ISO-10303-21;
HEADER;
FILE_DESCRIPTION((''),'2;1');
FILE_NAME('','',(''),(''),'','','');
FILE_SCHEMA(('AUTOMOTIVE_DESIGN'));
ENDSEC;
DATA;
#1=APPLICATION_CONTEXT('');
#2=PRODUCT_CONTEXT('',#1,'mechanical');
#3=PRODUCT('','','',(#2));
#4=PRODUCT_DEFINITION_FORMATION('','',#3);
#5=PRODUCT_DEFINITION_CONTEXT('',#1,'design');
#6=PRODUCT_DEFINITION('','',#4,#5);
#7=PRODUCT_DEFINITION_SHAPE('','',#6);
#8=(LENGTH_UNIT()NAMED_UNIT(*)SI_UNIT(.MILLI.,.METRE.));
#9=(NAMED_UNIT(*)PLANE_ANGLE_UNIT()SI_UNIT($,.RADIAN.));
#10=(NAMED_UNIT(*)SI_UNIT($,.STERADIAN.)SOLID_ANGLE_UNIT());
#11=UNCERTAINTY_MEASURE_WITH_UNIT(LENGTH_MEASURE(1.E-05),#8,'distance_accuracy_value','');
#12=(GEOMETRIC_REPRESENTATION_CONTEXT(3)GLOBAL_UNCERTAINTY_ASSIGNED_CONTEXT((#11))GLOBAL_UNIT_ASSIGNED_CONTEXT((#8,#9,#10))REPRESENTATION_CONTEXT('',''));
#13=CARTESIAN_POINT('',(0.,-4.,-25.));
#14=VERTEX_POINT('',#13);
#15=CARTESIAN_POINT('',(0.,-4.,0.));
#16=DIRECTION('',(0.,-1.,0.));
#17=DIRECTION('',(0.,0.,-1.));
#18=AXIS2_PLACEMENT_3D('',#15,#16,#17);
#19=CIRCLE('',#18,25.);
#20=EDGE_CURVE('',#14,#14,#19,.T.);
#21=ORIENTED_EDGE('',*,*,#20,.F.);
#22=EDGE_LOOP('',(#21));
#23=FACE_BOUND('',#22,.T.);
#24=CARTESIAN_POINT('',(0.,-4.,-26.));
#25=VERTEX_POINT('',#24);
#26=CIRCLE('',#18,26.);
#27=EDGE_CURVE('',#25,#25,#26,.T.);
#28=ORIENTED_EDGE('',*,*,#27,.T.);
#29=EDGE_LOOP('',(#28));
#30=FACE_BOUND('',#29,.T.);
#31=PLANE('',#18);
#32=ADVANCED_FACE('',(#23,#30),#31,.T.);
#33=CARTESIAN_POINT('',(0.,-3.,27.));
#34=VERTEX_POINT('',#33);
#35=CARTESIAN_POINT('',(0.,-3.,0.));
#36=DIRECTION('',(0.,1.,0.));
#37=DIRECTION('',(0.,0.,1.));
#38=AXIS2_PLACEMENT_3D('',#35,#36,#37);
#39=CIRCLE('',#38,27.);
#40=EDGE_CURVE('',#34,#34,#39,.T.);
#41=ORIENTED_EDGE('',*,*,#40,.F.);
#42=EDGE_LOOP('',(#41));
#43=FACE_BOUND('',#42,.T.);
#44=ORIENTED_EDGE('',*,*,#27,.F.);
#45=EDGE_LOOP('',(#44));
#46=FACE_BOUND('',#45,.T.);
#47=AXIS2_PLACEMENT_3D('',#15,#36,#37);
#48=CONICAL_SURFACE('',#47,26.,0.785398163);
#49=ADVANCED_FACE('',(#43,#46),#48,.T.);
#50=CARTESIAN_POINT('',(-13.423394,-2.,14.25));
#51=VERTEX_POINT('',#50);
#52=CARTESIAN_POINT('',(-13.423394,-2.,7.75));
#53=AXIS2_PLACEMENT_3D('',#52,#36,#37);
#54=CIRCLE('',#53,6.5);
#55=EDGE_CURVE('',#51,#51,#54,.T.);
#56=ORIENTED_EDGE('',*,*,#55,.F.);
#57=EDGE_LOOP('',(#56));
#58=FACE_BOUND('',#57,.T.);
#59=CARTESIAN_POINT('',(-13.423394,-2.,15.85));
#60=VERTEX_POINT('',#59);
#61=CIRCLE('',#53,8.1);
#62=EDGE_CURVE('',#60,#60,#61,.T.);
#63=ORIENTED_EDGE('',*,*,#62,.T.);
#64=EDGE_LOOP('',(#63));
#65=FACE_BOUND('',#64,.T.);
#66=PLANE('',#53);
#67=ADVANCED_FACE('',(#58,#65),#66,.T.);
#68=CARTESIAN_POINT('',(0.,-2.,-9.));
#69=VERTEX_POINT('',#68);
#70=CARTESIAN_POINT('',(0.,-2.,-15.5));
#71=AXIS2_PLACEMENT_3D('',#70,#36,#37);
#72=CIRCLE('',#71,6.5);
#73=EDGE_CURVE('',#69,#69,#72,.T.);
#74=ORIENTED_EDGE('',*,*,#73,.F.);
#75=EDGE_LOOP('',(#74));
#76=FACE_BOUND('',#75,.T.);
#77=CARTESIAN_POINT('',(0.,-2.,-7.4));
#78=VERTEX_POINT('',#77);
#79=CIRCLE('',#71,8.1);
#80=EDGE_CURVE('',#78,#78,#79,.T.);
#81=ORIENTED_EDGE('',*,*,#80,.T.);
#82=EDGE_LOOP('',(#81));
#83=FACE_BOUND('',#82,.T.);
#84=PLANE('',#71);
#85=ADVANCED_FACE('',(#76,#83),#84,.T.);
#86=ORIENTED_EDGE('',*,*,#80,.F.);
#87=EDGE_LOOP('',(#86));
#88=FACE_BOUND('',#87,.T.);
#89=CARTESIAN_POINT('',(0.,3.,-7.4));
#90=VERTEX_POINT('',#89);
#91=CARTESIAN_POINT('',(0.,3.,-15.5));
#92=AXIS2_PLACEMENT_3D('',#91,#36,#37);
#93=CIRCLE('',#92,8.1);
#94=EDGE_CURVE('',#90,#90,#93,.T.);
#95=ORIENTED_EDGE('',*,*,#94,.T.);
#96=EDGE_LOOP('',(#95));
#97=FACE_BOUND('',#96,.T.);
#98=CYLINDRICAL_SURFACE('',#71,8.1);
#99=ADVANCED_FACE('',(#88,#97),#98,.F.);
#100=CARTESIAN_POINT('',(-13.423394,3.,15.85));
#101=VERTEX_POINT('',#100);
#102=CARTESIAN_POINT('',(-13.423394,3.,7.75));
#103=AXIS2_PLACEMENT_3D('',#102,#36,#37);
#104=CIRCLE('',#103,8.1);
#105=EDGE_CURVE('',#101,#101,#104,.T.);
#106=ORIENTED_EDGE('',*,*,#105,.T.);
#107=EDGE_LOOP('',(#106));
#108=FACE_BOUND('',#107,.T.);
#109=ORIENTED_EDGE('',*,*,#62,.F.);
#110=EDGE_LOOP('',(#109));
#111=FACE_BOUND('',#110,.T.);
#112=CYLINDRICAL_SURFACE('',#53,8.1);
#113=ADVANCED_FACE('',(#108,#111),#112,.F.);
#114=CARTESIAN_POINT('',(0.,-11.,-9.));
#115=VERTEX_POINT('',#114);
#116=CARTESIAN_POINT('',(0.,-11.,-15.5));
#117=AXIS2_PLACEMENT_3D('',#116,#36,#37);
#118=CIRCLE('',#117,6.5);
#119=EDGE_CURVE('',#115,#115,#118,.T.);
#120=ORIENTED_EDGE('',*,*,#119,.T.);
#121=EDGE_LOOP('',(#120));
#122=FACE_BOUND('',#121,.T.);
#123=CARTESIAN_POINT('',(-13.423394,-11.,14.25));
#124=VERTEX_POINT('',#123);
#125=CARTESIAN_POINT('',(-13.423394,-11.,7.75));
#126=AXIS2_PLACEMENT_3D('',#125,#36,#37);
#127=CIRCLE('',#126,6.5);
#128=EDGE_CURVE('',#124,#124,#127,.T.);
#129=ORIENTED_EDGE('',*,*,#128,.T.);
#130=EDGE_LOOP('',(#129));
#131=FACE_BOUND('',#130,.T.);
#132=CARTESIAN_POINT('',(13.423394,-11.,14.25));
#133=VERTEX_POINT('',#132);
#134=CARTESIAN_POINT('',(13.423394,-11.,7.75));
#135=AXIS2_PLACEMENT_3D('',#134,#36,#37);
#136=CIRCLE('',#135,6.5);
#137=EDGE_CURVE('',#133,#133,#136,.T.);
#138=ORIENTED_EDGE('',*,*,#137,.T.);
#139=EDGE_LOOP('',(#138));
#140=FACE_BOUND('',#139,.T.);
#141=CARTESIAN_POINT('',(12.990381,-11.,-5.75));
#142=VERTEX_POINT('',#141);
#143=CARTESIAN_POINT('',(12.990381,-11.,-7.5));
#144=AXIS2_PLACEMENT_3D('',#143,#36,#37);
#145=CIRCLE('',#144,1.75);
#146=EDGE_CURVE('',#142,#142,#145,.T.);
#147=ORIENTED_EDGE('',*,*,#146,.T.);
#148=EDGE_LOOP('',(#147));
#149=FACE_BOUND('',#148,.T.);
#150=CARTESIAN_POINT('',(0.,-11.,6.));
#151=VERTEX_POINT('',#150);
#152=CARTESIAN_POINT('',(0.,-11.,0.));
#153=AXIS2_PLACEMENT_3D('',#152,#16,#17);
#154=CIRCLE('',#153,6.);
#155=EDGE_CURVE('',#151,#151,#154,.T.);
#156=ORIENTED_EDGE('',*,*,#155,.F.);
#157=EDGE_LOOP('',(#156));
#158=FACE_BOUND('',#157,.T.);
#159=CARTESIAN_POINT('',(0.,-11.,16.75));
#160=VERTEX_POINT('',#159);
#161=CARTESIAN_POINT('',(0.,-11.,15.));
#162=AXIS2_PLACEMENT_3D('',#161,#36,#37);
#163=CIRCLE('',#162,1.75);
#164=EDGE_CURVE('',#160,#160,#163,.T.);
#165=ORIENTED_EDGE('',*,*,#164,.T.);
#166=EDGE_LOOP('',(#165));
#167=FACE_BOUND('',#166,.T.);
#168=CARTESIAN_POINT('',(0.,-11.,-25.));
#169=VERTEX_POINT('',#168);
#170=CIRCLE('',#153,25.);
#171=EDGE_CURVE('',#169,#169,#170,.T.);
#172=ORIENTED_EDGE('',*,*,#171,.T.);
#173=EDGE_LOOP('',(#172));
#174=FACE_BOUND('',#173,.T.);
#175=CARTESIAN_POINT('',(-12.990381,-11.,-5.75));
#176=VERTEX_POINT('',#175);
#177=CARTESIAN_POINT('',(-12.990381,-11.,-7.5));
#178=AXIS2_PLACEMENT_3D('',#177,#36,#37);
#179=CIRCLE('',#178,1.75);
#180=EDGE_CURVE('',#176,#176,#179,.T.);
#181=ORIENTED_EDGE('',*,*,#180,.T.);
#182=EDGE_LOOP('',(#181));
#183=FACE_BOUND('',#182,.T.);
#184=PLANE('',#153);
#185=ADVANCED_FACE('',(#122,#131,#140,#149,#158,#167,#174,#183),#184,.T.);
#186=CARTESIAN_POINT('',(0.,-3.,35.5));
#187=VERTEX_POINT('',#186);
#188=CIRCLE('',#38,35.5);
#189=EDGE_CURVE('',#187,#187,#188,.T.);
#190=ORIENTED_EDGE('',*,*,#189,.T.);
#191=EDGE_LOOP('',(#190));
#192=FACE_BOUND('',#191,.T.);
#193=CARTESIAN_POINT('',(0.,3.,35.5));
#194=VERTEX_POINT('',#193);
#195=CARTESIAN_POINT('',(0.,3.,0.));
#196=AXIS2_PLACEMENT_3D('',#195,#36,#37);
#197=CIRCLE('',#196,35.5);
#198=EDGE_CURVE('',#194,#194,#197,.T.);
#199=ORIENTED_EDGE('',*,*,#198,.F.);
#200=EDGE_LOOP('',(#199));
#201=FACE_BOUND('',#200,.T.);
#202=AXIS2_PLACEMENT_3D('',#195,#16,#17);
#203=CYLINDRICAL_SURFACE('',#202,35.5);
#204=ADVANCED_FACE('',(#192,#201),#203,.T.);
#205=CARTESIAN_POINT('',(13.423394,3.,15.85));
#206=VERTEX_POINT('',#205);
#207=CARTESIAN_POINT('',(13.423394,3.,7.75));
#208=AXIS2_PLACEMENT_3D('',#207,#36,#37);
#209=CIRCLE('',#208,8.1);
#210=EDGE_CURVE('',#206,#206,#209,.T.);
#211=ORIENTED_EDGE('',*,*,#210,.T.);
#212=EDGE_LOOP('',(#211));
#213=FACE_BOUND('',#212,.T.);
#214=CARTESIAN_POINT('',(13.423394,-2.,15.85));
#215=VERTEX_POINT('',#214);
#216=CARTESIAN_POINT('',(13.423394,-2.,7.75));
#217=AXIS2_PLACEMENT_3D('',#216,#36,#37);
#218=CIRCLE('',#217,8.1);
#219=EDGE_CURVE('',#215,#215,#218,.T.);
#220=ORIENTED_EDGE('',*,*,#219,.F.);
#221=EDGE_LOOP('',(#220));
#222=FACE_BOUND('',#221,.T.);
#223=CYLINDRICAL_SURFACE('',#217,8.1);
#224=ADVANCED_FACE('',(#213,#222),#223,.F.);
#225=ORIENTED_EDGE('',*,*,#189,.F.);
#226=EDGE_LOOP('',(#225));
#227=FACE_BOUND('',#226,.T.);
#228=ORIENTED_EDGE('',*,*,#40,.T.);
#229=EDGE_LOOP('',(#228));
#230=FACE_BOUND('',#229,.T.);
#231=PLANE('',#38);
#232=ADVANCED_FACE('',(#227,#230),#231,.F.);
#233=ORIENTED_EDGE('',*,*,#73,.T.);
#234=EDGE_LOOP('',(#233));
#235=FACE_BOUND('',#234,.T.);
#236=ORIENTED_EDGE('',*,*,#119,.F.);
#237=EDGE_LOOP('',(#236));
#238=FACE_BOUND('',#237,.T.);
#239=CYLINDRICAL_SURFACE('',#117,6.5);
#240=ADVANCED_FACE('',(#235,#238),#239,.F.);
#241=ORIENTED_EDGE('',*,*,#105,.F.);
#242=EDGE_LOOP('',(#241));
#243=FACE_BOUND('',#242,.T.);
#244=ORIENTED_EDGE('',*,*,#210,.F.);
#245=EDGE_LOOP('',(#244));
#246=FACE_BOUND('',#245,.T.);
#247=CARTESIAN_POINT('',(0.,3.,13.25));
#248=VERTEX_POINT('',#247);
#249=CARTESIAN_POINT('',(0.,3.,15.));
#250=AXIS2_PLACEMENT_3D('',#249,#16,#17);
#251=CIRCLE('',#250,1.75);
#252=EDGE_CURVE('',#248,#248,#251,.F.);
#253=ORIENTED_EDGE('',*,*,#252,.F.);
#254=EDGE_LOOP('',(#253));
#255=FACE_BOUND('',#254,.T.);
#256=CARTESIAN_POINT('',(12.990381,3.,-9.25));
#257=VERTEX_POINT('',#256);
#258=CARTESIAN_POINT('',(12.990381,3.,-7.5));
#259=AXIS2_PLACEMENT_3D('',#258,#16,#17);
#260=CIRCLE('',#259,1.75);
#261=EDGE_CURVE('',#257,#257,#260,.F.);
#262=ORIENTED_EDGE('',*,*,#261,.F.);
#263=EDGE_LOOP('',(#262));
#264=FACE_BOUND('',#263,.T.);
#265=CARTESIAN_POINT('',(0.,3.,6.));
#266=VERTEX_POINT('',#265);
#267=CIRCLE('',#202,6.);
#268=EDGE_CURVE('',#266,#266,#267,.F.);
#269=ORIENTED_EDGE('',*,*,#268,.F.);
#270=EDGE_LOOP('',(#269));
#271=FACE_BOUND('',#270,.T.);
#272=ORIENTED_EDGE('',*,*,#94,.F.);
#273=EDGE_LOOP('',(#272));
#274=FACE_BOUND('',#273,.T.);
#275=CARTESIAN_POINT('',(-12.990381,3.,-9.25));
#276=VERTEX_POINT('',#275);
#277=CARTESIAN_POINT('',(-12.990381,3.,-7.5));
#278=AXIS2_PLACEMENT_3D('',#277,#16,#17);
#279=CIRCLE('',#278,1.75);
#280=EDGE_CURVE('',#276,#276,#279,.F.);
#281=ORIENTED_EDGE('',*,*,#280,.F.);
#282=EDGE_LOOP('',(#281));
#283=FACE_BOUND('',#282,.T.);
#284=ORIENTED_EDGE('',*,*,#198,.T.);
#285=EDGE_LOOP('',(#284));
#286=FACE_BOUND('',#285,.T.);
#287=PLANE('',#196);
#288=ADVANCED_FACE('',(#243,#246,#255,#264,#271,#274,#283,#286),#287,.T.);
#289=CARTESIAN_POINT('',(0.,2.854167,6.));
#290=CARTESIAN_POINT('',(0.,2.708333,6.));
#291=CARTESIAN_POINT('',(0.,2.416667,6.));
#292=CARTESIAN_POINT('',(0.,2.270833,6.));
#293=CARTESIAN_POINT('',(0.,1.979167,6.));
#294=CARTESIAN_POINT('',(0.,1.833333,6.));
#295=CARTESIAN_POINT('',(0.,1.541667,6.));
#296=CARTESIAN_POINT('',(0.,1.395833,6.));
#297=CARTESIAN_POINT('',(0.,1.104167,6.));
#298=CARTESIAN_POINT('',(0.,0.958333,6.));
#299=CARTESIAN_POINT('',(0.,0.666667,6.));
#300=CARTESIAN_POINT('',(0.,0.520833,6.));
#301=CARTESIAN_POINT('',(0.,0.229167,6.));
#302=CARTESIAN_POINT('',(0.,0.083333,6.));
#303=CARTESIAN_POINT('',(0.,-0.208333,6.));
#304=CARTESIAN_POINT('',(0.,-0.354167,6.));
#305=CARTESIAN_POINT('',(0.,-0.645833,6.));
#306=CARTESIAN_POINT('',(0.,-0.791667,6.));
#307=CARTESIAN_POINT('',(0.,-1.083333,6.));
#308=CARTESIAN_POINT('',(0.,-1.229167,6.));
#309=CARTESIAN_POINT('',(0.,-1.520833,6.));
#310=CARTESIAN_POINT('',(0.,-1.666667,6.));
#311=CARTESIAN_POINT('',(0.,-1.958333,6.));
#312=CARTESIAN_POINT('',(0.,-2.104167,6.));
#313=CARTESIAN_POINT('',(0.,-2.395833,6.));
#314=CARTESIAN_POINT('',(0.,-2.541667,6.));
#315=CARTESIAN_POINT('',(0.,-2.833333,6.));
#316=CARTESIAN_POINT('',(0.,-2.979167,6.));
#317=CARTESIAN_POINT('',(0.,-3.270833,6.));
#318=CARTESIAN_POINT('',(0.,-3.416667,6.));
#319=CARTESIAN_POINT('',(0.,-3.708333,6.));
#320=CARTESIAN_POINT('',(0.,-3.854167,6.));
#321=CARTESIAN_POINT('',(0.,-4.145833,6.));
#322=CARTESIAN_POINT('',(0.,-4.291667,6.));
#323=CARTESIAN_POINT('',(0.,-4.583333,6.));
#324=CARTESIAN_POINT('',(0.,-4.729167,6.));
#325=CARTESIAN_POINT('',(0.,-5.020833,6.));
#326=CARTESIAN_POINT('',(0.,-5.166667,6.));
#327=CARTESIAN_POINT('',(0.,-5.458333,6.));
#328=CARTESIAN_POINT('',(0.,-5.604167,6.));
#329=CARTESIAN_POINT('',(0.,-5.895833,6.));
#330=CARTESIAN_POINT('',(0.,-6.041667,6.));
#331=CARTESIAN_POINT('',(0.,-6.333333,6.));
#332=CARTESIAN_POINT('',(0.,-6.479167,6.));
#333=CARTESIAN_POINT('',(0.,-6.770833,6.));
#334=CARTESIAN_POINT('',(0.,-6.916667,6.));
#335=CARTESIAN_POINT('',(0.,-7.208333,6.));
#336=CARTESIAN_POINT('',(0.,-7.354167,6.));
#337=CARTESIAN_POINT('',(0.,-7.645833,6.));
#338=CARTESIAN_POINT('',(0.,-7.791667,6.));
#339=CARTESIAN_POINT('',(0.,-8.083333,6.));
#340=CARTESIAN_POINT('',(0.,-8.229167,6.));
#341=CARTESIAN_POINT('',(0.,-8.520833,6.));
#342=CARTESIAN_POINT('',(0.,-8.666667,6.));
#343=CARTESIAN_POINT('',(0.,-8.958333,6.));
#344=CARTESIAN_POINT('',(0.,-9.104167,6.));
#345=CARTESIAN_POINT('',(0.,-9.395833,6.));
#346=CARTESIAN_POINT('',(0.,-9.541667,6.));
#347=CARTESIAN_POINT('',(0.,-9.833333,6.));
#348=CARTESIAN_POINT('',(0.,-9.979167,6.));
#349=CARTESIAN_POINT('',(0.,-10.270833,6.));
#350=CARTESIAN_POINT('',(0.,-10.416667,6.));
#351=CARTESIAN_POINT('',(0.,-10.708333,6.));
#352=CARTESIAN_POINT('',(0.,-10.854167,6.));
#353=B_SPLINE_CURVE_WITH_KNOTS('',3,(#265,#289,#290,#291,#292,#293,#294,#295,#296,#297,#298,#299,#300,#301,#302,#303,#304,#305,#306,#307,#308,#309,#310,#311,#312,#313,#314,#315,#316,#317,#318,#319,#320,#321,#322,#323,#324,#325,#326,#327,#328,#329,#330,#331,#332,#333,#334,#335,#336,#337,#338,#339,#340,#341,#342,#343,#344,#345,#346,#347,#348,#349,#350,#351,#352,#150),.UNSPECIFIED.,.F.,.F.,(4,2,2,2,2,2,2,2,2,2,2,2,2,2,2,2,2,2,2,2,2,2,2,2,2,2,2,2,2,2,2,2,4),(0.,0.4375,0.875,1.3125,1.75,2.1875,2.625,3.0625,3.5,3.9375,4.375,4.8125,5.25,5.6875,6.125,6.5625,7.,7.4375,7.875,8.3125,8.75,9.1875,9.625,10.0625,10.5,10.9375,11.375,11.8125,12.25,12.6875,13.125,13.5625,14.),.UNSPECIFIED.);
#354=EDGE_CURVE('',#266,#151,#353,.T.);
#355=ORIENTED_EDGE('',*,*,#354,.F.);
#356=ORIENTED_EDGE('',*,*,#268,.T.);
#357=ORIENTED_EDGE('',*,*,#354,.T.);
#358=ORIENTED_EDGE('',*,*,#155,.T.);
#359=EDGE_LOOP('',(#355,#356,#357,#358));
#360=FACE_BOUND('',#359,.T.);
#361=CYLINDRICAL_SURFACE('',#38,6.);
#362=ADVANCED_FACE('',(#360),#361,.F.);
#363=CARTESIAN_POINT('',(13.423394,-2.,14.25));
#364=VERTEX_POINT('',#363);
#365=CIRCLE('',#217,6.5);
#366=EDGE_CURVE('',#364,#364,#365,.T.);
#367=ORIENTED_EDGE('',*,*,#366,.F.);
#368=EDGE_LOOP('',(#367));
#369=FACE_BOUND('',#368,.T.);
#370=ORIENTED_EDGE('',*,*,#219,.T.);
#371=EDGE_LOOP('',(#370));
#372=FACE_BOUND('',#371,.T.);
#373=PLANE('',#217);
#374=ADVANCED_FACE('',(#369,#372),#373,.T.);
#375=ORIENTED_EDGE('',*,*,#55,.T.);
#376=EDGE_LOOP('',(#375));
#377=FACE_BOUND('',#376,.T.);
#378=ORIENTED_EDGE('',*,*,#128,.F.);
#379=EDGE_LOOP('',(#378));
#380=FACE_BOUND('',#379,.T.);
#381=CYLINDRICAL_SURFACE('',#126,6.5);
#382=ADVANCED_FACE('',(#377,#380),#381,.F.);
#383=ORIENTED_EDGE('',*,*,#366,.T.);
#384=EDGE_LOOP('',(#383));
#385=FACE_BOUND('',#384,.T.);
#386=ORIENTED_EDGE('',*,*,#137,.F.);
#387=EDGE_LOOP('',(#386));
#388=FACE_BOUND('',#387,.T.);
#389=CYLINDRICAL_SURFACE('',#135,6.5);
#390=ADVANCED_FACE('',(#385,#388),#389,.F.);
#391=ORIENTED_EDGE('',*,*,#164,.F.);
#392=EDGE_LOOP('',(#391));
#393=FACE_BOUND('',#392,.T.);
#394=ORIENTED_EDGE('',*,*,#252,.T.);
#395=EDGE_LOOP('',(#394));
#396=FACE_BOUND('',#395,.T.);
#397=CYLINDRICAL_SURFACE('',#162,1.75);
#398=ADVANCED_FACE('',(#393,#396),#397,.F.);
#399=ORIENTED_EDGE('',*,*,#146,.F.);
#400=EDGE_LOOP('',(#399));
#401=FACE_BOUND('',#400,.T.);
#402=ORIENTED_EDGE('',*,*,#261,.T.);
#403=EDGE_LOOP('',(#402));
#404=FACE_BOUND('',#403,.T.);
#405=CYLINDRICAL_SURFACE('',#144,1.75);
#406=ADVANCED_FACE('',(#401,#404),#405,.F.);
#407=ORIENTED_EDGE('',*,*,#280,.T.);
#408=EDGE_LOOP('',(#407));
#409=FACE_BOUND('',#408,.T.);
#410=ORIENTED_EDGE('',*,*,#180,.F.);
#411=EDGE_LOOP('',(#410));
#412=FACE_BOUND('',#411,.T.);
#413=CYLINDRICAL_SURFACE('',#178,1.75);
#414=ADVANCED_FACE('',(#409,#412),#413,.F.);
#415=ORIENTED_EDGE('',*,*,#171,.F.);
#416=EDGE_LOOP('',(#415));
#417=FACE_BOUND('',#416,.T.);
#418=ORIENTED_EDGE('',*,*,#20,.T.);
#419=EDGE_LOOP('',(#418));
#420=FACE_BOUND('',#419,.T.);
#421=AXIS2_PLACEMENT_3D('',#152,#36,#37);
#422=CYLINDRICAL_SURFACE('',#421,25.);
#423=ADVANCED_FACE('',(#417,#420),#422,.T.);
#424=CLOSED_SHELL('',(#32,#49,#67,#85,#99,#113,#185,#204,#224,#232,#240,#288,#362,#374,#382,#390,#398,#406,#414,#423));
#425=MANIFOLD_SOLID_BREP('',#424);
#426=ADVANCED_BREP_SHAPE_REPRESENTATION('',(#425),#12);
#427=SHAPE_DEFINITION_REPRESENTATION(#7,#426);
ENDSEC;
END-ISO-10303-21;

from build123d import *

# Parameters (mm, degrees)
SKETCH1_R               = 35.5
BOSS_EXTRUDE1_DEPTH     = 3
SKETCH2_R               = 26
BOSS_EXTRUDE2_DEPTH     = 1
SKETCH3_R               = 25
BOSS_EXTRUDE3_DEPTH     = 19
SKETCH5_R               = 6
CUT_EXTRUDE2_DEPTH      = 57.53759811
SKETCH6_R               = 30.018937713
SKETCH6_R_2             = 20
CUT_EXTRUDE3_DEPTH      = 12
CHAMFER2_SIZE           = 2.5
BOSS_EXTRUDE4_START     = 8
SKETCH8_R               = 25
BOSS_EXTRUDE4_DEPTH     = 8
SKETCH10_R              = 6
CUT_EXTRUDE6_DEPTH      = 61.634148794
SKETCH7_R               = 1.75
CUT_EXTRUDE4_DEPTH      = 61.634148794
BOSS_EXTRUDE5_START     = 1
SKETCH11_R              = 26
SKETCH11_R_2            = 25
BOSS_EXTRUDE5_DEPTH     = 1
CHAMFER1_SIZE           = 1
CUT_EXTRUDE7_DEPTH      = 56.222278113
CUT_EXTRUDE7_DEPTH_BACK = 56.222278113
SKETCH12_W              = 92.25680519
SKETCH12_H              = 27.524612869
SKETCH14_R              = 8.1
CUT_EXTRUDE8_DEPTH      = 5
SKETCH15_R              = 6.5
CUT_EXTRUDE9_DEPTH      = 52.004901725


with BuildPart() as part:
    # Sketch1 → Boss-Extrude1 (new, symmetric)
    with BuildSketch(Plane(origin=(0, 0, 0), x_dir=(1, 0, 0), z_dir=(0, 1, 0))):
        with Locations(Location((0, 0, 0), (0, 0, 270))):
            Circle(SKETCH1_R)
    extrude(amount=BOSS_EXTRUDE1_DEPTH, both=True)

    # Sketch2 → Boss-Extrude2 (add)
    with BuildSketch(Plane(origin=(0, 3, 0), x_dir=(1, 0, 0), z_dir=(0, 1, 0))):
        with Locations(Location((0, 0, 0), (0, 0, 270))):
            Circle(SKETCH2_R)
    extrude(amount=BOSS_EXTRUDE2_DEPTH)

    # Sketch3 → Boss-Extrude3 (add)
    with BuildSketch(Plane(origin=(0, 4, 0), x_dir=(1, 0, 0), z_dir=(0, 1, 0))):
        with Locations(Location((0, 0, 0), (0, 0, 270))):
            Circle(SKETCH3_R)
    extrude(amount=BOSS_EXTRUDE3_DEPTH)

    # Sketch5 → Cut-Extrude2 (cut, through all)
    with BuildSketch(Plane(origin=(0, 23, 0), x_dir=(1, 0, 0), z_dir=(0, 1, 0))):
        with Locations(Location((0, 0, 0), (0, 0, 270))):
            Circle(SKETCH5_R)
    extrude(amount=-CUT_EXTRUDE2_DEPTH, mode=Mode.SUBTRACT)

    # Sketch6 → Cut-Extrude3 (cut)
    with BuildSketch(Plane(origin=(0, 23, 0), x_dir=(1, 0, 0), z_dir=(0, 1, 0))):
        Circle(SKETCH6_R)
        with Locations(Location((0, 0, 0), (0, 0, 270))):
            Circle(SKETCH6_R_2, mode=Mode.SUBTRACT)
    extrude(amount=-CUT_EXTRUDE3_DEPTH, mode=Mode.SUBTRACT)

    # Chamfer2
    chamfer2_edges = [part.edges().sort_by_distance(p)[0] for p in [
        (0, 11, -20),
    ]]
    chamfer(chamfer2_edges, length=CHAMFER2_SIZE)

    # Sketch8 → Boss-Extrude4 (add)
    with BuildSketch(Plane.XZ.offset(3).offset(BOSS_EXTRUDE4_START)):
        with Locations(Location((0, 0, 0), (0, 0, 90))):
            Circle(SKETCH8_R)
    extrude(amount=-BOSS_EXTRUDE4_DEPTH)

    # Sketch10 → Cut-Extrude6 (cut, through all)
    with BuildSketch(Plane.XZ.offset(11)):
        with Locations(Location((0, 0, 0), (0, 0, 90))):
            Circle(SKETCH10_R)
    extrude(amount=-CUT_EXTRUDE6_DEPTH, mode=Mode.SUBTRACT)

    # Sketch7 → Cut-Extrude4 (cut, through all)
    with BuildSketch(Plane(origin=(0, 23, 0), x_dir=(1, 0, 0), z_dir=(0, 1, 0))):
        with Locations(Location((0, -15, 0), (0, 0, 270))):
            Circle(SKETCH7_R)
        with Locations(Location((-12.990381057, 7.5, 0), (0, 0, 270))):
            Circle(SKETCH7_R)
        with Locations(Location((12.990381057, 7.5, 0), (0, 0, 270))):
            Circle(SKETCH7_R)
    extrude(amount=-CUT_EXTRUDE4_DEPTH, mode=Mode.SUBTRACT)

    # Sketch11 → Boss-Extrude5 (add)
    with BuildSketch(Plane.XZ.offset(3).offset(BOSS_EXTRUDE5_START)):
        with Locations(Location((0, 0, 0), (0, 0, 90))):
            Circle(SKETCH11_R)
        with Locations(Location((0, 0, 0), (0, 0, 90))):
            Circle(SKETCH11_R_2, mode=Mode.SUBTRACT)
    extrude(amount=-BOSS_EXTRUDE5_DEPTH)

    # Chamfer1
    chamfer1_edges = [part.edges().sort_by_distance(p)[0] for p in [
        (0, 3, -26),
        (0, -3, -26),
    ]]
    chamfer(chamfer1_edges, length=CHAMFER1_SIZE - 0.0001)  # a hair under: the kernel refuses the full size

    # Sketch12 → Cut-Extrude7 (cut, two sides: drawn at the far end of the back side and taken through both)
    with BuildSketch(Plane.XY.offset(-CUT_EXTRUDE7_DEPTH_BACK)):
        with Locations((2.130775151, 16.762306435)):
            Rectangle(SKETCH12_W, SKETCH12_H)
    extrude(amount=CUT_EXTRUDE7_DEPTH + CUT_EXTRUDE7_DEPTH_BACK, mode=Mode.SUBTRACT)

    # Sketch14 → Cut-Extrude8 (cut)
    with BuildSketch(Plane(origin=(0, 3, 0), x_dir=(1, 0, 0), z_dir=(0, 1, 0))):
        with Locations(Location((0, 15.5, 0), (0, 0, 270))):
            Circle(SKETCH14_R)
        with Locations(Location((13.423393759, -7.75, 0), (0, 0, 270))):
            Circle(SKETCH14_R)
        with Locations(Location((-13.423393759, -7.75, 0), (0, 0, 270))):
            Circle(SKETCH14_R)
    extrude(amount=-CUT_EXTRUDE8_DEPTH, mode=Mode.SUBTRACT)

    # Sketch15 → Cut-Extrude9 (cut, through all)
    with BuildSketch(Plane(origin=(0, -2, 0), x_dir=(1, 0, 0), z_dir=(0, 1, 0))):
        with Locations(Location((0, 15.5, 0), (0, 0, 270))):
            Circle(SKETCH15_R)
        with Locations(Location((13.423393759, -7.75, 0), (0, 0, 270))):
            Circle(SKETCH15_R)
        with Locations(Location((-13.423393759, -7.75, 0), (0, 0, 270))):
            Circle(SKETCH15_R)
    extrude(amount=-CUT_EXTRUDE9_DEPTH, mode=Mode.SUBTRACT)


solid = part.part
